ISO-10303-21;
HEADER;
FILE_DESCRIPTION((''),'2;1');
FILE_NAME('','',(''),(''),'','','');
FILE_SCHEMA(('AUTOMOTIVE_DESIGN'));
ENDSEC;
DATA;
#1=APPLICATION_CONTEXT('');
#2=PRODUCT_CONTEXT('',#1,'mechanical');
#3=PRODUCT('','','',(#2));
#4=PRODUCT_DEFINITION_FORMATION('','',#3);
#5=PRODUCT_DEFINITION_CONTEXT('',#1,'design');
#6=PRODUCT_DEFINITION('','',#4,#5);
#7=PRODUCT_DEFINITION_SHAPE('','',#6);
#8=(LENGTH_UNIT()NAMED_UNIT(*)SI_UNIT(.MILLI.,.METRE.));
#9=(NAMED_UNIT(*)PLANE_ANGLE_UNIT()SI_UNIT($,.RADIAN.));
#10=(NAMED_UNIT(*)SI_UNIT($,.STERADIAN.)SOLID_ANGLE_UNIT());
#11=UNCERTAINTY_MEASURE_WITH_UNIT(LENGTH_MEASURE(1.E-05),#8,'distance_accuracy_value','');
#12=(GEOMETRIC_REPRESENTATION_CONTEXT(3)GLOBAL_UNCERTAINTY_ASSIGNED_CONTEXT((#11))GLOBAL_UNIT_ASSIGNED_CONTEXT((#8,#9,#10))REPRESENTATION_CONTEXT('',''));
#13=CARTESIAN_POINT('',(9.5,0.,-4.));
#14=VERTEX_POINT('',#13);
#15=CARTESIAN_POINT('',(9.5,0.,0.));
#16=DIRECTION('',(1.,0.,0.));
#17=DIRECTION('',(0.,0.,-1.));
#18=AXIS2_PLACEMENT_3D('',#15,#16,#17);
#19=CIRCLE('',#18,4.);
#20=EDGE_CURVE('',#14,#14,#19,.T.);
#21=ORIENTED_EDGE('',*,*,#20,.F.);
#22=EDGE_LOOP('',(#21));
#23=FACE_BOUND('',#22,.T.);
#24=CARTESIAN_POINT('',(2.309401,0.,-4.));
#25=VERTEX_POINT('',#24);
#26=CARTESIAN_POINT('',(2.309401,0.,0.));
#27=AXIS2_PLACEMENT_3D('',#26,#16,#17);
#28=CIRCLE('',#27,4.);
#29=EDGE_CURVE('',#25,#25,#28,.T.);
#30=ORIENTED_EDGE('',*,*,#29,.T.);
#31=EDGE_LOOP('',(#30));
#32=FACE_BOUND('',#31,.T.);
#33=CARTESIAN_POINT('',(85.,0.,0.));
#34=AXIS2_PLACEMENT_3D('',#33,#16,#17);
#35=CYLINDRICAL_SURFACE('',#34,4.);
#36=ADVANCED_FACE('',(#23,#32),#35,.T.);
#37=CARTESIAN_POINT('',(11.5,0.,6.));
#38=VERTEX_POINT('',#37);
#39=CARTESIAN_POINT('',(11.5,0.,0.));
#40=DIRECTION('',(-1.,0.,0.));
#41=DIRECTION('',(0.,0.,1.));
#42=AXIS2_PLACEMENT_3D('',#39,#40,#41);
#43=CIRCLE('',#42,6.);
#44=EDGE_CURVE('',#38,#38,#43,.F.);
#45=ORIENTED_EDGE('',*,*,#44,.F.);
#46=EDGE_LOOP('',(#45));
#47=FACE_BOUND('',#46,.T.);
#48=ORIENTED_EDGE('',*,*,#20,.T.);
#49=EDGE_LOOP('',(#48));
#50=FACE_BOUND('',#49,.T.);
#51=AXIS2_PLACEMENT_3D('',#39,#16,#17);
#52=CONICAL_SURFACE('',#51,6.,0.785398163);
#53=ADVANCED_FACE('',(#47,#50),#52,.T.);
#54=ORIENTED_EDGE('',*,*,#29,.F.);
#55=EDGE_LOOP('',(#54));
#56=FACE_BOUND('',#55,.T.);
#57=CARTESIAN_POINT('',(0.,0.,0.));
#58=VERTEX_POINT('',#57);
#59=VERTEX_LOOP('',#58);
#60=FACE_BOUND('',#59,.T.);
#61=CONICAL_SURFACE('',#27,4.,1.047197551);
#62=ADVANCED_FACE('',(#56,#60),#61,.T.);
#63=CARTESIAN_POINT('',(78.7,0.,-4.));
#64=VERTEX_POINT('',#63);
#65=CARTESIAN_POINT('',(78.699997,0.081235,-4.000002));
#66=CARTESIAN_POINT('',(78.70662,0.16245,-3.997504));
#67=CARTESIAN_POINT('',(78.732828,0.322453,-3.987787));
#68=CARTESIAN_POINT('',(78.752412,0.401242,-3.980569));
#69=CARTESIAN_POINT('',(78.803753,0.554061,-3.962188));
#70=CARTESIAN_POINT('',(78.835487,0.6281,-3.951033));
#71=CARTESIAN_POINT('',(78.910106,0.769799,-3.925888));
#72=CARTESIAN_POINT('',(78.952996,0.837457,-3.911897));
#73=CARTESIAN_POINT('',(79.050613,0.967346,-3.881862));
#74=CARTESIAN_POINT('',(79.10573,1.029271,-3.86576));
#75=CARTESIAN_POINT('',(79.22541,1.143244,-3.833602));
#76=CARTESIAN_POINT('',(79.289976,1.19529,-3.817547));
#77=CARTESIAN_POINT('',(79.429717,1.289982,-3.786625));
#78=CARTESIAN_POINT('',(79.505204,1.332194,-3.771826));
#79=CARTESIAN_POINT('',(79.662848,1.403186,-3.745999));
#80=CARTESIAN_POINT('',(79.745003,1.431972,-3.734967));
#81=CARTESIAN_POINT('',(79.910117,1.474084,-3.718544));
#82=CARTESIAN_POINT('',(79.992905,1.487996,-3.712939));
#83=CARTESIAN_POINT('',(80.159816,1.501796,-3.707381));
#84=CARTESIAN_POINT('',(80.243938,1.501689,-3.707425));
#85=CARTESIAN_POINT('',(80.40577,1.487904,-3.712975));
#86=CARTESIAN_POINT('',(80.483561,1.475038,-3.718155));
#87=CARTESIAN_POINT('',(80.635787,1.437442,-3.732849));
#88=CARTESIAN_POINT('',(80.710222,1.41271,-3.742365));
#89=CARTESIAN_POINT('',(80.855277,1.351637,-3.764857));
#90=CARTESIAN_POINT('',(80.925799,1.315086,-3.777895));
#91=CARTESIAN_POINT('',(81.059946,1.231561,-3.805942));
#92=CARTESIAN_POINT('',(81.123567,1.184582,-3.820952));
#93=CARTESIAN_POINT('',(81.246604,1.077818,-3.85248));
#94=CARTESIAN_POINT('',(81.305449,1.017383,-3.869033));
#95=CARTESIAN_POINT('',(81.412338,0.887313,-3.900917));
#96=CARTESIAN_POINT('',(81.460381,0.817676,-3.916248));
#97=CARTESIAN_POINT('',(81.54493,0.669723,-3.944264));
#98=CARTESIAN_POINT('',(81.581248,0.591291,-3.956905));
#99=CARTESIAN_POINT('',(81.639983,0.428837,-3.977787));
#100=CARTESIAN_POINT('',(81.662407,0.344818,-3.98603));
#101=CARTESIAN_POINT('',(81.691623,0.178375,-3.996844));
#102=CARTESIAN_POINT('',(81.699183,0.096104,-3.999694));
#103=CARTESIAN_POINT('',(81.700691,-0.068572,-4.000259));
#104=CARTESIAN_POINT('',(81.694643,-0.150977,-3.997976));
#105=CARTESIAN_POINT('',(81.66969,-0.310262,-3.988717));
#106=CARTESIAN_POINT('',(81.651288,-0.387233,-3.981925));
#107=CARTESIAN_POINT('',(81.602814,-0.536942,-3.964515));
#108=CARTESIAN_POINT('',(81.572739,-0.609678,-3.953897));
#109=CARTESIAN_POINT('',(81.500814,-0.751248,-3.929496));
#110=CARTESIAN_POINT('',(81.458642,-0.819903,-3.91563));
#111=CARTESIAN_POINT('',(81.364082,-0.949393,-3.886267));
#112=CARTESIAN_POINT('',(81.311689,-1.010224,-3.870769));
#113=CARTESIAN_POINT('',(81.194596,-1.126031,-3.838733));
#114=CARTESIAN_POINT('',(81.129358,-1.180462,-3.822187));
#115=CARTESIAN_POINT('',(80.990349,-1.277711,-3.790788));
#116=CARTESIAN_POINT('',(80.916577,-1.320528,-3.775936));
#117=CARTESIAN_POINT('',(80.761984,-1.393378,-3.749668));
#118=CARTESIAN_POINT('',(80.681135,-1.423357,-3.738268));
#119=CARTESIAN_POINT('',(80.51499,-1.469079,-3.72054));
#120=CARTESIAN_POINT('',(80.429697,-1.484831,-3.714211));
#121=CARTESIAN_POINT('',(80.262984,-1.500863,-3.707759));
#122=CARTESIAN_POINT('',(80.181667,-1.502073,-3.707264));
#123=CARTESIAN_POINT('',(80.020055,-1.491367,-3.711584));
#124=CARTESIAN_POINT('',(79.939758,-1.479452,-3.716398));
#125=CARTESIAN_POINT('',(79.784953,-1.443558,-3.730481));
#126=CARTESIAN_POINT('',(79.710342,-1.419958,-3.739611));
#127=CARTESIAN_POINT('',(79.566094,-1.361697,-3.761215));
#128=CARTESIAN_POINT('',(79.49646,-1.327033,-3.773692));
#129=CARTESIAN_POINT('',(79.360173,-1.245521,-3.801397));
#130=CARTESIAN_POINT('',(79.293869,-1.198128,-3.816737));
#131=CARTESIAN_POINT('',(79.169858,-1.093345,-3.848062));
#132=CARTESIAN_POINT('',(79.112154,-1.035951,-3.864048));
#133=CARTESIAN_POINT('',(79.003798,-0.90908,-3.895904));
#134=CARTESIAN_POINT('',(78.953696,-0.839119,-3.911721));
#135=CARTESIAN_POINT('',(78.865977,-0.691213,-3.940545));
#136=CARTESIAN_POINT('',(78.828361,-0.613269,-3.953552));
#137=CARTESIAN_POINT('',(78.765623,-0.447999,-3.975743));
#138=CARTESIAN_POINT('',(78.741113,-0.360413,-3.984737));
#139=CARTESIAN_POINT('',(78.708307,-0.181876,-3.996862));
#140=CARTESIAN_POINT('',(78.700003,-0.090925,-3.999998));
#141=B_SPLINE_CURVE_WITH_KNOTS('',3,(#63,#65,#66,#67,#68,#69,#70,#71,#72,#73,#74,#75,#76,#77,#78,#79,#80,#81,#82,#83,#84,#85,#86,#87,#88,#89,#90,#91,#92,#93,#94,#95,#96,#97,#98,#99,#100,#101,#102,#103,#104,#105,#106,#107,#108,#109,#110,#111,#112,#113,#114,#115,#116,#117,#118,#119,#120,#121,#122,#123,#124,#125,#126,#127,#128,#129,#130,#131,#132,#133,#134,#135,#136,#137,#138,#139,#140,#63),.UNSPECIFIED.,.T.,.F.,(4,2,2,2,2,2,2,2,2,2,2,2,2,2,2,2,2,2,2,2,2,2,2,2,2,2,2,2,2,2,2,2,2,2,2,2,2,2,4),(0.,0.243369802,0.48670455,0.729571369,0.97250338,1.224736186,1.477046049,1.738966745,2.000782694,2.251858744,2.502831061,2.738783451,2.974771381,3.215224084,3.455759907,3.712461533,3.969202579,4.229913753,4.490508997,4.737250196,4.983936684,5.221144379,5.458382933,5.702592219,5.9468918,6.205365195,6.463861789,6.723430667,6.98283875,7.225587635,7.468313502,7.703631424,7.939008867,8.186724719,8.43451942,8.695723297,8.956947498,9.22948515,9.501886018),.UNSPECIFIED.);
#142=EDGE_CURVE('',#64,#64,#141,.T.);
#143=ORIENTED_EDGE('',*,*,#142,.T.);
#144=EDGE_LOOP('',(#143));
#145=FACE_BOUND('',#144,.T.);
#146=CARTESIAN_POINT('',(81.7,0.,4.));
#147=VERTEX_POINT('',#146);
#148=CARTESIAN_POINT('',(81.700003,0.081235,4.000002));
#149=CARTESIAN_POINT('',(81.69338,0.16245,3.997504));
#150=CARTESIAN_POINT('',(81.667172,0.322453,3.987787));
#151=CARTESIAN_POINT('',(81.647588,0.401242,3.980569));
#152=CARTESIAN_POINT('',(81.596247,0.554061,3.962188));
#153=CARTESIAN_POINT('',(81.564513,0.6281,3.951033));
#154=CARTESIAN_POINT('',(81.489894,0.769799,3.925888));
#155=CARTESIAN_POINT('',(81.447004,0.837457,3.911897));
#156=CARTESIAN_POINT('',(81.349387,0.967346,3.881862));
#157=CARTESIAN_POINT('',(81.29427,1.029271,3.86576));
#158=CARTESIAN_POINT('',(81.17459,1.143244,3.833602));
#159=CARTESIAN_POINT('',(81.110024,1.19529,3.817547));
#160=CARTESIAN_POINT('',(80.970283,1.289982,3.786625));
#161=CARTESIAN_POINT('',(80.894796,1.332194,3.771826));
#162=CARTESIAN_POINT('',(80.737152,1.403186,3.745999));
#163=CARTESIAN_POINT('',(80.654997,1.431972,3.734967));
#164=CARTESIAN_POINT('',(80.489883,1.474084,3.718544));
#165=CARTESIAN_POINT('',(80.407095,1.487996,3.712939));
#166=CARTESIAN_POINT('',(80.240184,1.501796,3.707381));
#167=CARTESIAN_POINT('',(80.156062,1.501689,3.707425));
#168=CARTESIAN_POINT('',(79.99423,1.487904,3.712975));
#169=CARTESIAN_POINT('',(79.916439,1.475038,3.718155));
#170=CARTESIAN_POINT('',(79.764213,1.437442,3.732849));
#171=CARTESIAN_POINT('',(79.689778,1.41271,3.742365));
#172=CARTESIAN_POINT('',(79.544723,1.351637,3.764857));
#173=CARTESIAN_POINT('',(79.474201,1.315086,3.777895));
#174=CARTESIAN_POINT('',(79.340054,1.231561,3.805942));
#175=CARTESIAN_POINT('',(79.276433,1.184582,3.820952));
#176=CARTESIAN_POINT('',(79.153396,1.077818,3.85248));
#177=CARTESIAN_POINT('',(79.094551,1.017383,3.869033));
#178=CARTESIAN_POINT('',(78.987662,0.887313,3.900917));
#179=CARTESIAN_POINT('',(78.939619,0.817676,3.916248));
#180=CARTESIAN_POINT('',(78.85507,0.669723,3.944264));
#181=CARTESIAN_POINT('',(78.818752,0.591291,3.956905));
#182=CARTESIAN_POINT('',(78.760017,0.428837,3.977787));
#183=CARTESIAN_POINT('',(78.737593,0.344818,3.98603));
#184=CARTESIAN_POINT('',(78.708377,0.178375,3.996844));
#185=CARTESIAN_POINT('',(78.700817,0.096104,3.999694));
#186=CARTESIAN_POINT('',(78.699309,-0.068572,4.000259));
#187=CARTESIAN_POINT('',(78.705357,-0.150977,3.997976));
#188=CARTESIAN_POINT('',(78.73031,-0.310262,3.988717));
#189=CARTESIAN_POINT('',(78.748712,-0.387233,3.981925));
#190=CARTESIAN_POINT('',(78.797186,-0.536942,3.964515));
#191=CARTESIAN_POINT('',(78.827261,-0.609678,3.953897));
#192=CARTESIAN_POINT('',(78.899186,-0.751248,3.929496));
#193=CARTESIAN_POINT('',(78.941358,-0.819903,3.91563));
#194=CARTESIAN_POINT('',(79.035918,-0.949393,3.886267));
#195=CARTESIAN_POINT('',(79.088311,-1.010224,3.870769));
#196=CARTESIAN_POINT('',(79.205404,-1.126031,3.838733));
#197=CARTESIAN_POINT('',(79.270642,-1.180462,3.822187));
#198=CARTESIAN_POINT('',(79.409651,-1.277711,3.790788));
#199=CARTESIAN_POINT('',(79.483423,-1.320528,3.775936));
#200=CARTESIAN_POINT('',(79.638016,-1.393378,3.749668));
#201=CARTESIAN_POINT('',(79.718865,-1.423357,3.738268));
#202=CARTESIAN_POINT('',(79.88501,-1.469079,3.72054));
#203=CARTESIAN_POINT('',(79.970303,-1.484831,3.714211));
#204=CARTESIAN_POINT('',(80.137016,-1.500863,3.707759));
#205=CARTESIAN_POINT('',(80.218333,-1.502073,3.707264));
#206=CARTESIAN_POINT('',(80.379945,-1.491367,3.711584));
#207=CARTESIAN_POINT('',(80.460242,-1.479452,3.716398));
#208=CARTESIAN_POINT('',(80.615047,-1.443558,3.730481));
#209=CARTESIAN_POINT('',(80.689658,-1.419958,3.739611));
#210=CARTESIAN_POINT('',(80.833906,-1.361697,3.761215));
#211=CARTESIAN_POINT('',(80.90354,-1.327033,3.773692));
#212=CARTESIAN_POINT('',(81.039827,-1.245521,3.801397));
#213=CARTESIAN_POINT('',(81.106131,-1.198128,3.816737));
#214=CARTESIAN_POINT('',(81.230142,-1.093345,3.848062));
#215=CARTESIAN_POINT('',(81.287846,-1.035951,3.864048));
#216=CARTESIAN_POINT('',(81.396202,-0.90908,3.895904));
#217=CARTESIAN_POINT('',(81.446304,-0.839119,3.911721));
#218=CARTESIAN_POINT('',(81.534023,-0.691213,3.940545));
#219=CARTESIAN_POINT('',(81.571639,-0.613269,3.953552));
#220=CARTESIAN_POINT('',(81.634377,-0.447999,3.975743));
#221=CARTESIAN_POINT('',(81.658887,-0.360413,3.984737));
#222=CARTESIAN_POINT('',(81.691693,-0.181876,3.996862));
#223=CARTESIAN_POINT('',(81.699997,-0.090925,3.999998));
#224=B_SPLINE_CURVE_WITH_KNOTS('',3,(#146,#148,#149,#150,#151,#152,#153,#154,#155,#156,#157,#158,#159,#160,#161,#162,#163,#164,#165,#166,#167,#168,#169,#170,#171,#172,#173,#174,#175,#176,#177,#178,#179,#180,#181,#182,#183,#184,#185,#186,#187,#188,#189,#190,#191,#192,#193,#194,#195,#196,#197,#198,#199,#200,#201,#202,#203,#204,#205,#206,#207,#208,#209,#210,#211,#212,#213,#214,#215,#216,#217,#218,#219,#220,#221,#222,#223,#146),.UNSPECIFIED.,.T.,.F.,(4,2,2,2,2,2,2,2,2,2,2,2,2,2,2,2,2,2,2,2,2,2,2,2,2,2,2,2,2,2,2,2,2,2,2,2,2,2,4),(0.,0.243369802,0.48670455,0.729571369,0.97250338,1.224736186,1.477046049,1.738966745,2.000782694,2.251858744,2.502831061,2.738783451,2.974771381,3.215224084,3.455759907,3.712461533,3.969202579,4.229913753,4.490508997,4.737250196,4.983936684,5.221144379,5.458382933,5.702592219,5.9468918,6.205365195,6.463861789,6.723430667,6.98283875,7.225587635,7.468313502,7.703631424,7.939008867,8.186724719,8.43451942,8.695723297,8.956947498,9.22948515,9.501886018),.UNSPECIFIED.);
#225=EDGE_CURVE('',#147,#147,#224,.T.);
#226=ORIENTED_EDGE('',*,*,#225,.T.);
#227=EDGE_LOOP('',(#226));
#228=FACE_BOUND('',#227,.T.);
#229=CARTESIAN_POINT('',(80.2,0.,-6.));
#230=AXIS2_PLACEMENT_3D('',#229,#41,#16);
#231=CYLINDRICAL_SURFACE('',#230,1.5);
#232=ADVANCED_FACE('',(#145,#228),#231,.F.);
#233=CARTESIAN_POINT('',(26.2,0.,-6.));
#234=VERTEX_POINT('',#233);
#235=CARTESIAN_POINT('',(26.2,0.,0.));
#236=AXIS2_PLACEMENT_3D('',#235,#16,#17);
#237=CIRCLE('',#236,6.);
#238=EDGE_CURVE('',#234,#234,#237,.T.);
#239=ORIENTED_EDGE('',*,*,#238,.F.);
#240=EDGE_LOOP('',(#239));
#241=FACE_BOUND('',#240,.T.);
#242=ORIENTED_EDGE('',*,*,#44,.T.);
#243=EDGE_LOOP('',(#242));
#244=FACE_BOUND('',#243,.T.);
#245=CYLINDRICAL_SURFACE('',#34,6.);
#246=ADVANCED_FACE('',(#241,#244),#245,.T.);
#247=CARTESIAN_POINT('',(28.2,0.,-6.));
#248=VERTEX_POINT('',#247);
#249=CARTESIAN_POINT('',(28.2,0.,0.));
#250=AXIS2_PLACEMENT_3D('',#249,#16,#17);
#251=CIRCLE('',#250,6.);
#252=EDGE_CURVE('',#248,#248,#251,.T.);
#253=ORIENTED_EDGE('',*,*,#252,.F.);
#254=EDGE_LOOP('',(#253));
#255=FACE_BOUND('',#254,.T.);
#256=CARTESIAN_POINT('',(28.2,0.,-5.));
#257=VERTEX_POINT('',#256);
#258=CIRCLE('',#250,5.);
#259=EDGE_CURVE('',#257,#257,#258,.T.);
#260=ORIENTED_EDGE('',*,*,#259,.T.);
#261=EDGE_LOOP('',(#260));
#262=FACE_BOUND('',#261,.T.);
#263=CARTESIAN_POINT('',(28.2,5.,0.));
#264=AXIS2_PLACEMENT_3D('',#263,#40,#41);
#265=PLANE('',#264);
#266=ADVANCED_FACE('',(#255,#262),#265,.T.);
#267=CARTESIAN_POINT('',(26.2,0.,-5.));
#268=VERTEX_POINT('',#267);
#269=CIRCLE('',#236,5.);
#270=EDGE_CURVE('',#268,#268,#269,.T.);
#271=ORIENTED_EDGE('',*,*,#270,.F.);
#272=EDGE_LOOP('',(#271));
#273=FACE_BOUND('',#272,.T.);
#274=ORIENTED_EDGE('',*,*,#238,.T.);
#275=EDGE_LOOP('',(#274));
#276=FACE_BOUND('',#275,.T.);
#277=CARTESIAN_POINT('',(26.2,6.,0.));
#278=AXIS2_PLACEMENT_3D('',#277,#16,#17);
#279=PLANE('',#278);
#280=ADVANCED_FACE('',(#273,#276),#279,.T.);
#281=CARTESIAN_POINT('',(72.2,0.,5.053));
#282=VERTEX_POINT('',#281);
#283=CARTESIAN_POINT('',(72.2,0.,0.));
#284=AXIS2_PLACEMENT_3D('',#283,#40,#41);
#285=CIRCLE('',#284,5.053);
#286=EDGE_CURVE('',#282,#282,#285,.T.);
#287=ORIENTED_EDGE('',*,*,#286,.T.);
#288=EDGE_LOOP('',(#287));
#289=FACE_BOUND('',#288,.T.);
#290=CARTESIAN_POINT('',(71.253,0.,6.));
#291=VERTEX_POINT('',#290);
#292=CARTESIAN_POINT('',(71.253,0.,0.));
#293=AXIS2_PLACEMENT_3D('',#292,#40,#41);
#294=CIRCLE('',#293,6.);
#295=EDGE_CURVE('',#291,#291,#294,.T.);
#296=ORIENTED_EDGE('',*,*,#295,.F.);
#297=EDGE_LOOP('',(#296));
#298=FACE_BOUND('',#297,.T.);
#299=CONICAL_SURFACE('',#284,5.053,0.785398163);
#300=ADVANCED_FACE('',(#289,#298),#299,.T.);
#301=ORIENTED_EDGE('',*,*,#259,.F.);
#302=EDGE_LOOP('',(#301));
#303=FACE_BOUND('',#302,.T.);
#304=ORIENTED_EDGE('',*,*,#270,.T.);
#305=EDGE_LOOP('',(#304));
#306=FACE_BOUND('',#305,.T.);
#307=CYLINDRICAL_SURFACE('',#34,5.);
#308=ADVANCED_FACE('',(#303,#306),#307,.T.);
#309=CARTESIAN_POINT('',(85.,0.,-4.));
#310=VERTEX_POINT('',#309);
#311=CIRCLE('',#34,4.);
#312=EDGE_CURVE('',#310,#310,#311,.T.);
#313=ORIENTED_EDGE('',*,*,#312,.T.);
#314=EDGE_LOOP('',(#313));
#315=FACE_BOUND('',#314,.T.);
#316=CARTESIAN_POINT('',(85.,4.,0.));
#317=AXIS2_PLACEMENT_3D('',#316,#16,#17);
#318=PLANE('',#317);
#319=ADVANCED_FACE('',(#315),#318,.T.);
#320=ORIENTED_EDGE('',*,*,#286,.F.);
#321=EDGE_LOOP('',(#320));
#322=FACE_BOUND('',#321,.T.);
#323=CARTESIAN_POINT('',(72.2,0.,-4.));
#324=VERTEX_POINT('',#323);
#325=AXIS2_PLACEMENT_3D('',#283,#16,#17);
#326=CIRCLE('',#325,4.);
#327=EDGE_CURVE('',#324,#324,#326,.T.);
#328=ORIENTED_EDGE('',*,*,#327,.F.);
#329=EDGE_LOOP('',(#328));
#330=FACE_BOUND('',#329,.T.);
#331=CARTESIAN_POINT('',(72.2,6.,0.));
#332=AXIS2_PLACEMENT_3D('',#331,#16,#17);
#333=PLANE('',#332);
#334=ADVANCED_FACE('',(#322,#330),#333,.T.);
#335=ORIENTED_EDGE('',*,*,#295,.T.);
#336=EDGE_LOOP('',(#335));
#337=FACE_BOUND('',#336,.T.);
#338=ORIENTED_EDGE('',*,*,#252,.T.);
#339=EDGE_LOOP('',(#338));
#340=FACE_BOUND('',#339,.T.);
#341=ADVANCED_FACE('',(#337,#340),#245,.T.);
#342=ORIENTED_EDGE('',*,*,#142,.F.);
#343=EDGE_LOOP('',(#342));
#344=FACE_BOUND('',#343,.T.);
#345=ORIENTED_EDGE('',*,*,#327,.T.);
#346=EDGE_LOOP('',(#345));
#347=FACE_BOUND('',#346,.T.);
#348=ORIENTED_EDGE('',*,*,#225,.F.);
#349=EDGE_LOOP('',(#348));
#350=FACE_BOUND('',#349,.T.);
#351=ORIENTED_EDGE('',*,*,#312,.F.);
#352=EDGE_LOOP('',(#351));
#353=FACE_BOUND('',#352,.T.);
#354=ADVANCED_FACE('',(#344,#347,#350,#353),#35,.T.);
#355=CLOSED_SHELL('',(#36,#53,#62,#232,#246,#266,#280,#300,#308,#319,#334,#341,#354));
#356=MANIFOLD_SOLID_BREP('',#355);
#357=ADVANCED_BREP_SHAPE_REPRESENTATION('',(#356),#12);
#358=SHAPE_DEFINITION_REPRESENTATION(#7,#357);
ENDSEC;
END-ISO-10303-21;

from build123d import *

# Parameters (mm, degrees)
CUT_EXTRUDE_1_DEPTH      = 86.422479477
CUT_EXTRUDE_1_DEPTH_BACK = 86.422479477
SKETCH_3_R               = 1.5
CHAMFER_1_SIZE           = 2


# Read off the part's stored shape, not the designer's step: M12 机械螺纹 螺柱1
with BuildPart() as part:
    # 草图1 → 旋转1 (revolve)
    with BuildSketch(Plane.XY, mode=Mode.PRIVATE) as revolve_1_sk:
        Polygon((0, 0), (2.309401077, 4), (9.5, 4), (9.5, 6), (26.2, 6), (26.2, 5), (28.2, 5), (28.2, 6), (72.2, 6), (72.2, 4), (85, 4), (85, 0), align=None)
    revolve(revolve_1_sk.sketch.rotate(Axis((85, 0, 0), (-1, 0, 0)), 90), axis=Axis((85, 0, 0), (-1, 0, 0)))

    # M12 机械螺纹 螺柱1 outline → M12 机械螺纹 螺柱1 (revolve, cut)
    with BuildSketch(Plane.YX):
        Polygon((6, 72.2), (5.053, 72.2), (6, 71.253), align=None)
    revolve(axis=Axis((0, 0, 0), (1, 0, 0)), mode=Mode.SUBTRACT)

    # 草图3 → 切除-拉伸1 (cut, two sides: drawn at the far end of the back side and taken through both)
    with BuildSketch(Plane.XY.offset(-CUT_EXTRUDE_1_DEPTH_BACK)):
        with Locations((80.2, 0)):
            Circle(SKETCH_3_R)
    extrude(amount=CUT_EXTRUDE_1_DEPTH + CUT_EXTRUDE_1_DEPTH_BACK, mode=Mode.SUBTRACT)

    # 倒角1
    chamfer_1_edges = [part.edges().sort_by_distance(p)[0] for p in [
        (9.5, 0, 6),
    ]]
    chamfer(chamfer_1_edges, length=CHAMFER_1_SIZE - 0.0001)  # a hair under: the kernel refuses the full size


solid = part.part
